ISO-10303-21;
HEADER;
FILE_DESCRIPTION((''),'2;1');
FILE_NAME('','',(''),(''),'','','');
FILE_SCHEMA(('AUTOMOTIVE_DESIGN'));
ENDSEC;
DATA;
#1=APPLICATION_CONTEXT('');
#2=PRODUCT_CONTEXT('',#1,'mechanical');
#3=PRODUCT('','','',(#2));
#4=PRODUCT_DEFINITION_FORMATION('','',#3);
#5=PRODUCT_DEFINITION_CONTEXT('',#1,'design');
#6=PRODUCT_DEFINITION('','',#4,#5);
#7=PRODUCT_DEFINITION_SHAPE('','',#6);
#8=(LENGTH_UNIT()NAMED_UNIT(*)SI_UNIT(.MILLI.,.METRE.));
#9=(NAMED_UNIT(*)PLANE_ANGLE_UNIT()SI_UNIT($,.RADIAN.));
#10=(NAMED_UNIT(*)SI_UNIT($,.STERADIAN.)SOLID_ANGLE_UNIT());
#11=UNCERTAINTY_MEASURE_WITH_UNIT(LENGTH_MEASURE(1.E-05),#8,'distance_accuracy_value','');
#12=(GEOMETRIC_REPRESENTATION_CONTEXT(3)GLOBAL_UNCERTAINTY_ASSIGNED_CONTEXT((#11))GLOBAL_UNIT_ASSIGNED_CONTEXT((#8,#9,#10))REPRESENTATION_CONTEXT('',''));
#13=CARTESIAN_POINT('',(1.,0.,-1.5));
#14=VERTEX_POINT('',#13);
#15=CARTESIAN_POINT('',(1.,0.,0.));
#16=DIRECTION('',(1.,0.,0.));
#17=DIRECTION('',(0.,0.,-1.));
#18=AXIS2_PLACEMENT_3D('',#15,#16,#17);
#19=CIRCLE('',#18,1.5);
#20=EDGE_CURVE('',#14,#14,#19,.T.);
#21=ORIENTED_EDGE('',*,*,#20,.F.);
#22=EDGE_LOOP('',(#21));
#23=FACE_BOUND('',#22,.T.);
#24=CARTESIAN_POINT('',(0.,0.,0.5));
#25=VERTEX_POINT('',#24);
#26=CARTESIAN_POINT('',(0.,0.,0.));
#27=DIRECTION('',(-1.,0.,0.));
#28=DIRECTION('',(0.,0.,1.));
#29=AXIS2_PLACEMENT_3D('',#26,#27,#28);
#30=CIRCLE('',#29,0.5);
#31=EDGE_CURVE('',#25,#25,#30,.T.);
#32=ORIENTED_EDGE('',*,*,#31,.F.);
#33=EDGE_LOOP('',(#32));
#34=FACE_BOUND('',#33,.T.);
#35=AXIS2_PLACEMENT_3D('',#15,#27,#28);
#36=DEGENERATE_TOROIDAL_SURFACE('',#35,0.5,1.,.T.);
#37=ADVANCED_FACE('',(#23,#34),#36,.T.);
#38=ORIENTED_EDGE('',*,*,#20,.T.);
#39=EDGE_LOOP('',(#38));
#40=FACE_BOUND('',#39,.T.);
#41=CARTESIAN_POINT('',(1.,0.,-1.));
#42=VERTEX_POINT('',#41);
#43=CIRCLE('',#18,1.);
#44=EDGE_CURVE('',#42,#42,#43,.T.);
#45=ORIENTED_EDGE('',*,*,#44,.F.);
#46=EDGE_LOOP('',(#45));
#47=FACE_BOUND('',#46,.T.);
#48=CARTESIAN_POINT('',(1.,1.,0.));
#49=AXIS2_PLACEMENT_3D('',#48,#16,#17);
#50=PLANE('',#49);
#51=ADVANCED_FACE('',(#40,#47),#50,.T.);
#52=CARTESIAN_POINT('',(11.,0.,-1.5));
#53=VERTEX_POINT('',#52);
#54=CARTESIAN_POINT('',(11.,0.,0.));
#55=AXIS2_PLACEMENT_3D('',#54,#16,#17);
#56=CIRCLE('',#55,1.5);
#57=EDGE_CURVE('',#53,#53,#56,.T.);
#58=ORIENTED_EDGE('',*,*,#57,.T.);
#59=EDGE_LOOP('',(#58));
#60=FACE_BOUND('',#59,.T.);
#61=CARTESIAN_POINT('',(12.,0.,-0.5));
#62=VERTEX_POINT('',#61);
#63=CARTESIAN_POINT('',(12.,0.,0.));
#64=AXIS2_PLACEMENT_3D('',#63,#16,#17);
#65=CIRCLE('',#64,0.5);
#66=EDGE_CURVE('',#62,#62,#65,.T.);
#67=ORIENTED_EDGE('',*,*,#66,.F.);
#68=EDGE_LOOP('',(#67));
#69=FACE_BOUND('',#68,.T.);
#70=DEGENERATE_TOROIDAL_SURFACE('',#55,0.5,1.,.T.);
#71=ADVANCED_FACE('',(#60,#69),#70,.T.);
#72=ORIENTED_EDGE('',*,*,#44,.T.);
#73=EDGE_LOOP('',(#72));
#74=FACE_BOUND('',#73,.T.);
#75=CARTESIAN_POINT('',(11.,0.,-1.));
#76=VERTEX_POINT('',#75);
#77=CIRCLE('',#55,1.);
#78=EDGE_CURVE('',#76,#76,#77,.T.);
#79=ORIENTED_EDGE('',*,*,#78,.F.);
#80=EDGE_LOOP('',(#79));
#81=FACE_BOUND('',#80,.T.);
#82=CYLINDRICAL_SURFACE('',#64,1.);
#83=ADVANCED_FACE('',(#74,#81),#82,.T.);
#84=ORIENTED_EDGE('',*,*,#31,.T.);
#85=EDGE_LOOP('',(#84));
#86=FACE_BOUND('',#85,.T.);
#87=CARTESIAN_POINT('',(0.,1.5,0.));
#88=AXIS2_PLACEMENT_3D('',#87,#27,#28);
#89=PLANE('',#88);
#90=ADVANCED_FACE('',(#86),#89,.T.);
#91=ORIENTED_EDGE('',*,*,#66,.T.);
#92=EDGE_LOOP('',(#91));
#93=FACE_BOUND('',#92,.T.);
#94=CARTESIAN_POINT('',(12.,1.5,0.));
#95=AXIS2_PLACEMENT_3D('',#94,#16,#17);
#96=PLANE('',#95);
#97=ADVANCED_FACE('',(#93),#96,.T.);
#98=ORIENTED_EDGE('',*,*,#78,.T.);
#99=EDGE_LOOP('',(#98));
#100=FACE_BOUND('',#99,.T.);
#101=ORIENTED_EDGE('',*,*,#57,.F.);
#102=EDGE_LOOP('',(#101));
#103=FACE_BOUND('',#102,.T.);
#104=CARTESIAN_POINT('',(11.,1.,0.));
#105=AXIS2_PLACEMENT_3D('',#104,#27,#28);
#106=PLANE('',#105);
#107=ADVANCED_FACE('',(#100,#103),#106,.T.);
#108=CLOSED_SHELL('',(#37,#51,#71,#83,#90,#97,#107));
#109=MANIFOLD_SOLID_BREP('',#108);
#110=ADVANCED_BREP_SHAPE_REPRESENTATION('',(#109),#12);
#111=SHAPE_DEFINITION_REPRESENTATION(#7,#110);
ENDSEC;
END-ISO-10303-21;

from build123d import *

# Parameters (mm, degrees)
FILLET1_R = 1


with BuildPart() as part:
    # Sketch2 → Revolve1 (revolve)
    with BuildSketch(Plane.XY, mode=Mode.PRIVATE) as revolve1_sk:
        Polygon((1, 1), (11, 1), (11, 1.5), (12, 1.5), (12, 0), (0, 0), (0, 1.5), (1, 1.5), align=None)
    revolve(revolve1_sk.sketch.rotate(Axis((12, 0, 0), (-1, 0, 0)), 90), axis=Axis((12, 0, 0), (-1, 0, 0)))

    # Fillet1
    fillet1_edges = [part.edges().sort_by_distance(p)[0] for p in [
        (0, 0, 1.5),
        (12, 0, 1.5),
    ]]
    fillet(fillet1_edges, radius=FILLET1_R - 0.0001)  # a hair under: the kernel refuses the full size


solid = part.part
